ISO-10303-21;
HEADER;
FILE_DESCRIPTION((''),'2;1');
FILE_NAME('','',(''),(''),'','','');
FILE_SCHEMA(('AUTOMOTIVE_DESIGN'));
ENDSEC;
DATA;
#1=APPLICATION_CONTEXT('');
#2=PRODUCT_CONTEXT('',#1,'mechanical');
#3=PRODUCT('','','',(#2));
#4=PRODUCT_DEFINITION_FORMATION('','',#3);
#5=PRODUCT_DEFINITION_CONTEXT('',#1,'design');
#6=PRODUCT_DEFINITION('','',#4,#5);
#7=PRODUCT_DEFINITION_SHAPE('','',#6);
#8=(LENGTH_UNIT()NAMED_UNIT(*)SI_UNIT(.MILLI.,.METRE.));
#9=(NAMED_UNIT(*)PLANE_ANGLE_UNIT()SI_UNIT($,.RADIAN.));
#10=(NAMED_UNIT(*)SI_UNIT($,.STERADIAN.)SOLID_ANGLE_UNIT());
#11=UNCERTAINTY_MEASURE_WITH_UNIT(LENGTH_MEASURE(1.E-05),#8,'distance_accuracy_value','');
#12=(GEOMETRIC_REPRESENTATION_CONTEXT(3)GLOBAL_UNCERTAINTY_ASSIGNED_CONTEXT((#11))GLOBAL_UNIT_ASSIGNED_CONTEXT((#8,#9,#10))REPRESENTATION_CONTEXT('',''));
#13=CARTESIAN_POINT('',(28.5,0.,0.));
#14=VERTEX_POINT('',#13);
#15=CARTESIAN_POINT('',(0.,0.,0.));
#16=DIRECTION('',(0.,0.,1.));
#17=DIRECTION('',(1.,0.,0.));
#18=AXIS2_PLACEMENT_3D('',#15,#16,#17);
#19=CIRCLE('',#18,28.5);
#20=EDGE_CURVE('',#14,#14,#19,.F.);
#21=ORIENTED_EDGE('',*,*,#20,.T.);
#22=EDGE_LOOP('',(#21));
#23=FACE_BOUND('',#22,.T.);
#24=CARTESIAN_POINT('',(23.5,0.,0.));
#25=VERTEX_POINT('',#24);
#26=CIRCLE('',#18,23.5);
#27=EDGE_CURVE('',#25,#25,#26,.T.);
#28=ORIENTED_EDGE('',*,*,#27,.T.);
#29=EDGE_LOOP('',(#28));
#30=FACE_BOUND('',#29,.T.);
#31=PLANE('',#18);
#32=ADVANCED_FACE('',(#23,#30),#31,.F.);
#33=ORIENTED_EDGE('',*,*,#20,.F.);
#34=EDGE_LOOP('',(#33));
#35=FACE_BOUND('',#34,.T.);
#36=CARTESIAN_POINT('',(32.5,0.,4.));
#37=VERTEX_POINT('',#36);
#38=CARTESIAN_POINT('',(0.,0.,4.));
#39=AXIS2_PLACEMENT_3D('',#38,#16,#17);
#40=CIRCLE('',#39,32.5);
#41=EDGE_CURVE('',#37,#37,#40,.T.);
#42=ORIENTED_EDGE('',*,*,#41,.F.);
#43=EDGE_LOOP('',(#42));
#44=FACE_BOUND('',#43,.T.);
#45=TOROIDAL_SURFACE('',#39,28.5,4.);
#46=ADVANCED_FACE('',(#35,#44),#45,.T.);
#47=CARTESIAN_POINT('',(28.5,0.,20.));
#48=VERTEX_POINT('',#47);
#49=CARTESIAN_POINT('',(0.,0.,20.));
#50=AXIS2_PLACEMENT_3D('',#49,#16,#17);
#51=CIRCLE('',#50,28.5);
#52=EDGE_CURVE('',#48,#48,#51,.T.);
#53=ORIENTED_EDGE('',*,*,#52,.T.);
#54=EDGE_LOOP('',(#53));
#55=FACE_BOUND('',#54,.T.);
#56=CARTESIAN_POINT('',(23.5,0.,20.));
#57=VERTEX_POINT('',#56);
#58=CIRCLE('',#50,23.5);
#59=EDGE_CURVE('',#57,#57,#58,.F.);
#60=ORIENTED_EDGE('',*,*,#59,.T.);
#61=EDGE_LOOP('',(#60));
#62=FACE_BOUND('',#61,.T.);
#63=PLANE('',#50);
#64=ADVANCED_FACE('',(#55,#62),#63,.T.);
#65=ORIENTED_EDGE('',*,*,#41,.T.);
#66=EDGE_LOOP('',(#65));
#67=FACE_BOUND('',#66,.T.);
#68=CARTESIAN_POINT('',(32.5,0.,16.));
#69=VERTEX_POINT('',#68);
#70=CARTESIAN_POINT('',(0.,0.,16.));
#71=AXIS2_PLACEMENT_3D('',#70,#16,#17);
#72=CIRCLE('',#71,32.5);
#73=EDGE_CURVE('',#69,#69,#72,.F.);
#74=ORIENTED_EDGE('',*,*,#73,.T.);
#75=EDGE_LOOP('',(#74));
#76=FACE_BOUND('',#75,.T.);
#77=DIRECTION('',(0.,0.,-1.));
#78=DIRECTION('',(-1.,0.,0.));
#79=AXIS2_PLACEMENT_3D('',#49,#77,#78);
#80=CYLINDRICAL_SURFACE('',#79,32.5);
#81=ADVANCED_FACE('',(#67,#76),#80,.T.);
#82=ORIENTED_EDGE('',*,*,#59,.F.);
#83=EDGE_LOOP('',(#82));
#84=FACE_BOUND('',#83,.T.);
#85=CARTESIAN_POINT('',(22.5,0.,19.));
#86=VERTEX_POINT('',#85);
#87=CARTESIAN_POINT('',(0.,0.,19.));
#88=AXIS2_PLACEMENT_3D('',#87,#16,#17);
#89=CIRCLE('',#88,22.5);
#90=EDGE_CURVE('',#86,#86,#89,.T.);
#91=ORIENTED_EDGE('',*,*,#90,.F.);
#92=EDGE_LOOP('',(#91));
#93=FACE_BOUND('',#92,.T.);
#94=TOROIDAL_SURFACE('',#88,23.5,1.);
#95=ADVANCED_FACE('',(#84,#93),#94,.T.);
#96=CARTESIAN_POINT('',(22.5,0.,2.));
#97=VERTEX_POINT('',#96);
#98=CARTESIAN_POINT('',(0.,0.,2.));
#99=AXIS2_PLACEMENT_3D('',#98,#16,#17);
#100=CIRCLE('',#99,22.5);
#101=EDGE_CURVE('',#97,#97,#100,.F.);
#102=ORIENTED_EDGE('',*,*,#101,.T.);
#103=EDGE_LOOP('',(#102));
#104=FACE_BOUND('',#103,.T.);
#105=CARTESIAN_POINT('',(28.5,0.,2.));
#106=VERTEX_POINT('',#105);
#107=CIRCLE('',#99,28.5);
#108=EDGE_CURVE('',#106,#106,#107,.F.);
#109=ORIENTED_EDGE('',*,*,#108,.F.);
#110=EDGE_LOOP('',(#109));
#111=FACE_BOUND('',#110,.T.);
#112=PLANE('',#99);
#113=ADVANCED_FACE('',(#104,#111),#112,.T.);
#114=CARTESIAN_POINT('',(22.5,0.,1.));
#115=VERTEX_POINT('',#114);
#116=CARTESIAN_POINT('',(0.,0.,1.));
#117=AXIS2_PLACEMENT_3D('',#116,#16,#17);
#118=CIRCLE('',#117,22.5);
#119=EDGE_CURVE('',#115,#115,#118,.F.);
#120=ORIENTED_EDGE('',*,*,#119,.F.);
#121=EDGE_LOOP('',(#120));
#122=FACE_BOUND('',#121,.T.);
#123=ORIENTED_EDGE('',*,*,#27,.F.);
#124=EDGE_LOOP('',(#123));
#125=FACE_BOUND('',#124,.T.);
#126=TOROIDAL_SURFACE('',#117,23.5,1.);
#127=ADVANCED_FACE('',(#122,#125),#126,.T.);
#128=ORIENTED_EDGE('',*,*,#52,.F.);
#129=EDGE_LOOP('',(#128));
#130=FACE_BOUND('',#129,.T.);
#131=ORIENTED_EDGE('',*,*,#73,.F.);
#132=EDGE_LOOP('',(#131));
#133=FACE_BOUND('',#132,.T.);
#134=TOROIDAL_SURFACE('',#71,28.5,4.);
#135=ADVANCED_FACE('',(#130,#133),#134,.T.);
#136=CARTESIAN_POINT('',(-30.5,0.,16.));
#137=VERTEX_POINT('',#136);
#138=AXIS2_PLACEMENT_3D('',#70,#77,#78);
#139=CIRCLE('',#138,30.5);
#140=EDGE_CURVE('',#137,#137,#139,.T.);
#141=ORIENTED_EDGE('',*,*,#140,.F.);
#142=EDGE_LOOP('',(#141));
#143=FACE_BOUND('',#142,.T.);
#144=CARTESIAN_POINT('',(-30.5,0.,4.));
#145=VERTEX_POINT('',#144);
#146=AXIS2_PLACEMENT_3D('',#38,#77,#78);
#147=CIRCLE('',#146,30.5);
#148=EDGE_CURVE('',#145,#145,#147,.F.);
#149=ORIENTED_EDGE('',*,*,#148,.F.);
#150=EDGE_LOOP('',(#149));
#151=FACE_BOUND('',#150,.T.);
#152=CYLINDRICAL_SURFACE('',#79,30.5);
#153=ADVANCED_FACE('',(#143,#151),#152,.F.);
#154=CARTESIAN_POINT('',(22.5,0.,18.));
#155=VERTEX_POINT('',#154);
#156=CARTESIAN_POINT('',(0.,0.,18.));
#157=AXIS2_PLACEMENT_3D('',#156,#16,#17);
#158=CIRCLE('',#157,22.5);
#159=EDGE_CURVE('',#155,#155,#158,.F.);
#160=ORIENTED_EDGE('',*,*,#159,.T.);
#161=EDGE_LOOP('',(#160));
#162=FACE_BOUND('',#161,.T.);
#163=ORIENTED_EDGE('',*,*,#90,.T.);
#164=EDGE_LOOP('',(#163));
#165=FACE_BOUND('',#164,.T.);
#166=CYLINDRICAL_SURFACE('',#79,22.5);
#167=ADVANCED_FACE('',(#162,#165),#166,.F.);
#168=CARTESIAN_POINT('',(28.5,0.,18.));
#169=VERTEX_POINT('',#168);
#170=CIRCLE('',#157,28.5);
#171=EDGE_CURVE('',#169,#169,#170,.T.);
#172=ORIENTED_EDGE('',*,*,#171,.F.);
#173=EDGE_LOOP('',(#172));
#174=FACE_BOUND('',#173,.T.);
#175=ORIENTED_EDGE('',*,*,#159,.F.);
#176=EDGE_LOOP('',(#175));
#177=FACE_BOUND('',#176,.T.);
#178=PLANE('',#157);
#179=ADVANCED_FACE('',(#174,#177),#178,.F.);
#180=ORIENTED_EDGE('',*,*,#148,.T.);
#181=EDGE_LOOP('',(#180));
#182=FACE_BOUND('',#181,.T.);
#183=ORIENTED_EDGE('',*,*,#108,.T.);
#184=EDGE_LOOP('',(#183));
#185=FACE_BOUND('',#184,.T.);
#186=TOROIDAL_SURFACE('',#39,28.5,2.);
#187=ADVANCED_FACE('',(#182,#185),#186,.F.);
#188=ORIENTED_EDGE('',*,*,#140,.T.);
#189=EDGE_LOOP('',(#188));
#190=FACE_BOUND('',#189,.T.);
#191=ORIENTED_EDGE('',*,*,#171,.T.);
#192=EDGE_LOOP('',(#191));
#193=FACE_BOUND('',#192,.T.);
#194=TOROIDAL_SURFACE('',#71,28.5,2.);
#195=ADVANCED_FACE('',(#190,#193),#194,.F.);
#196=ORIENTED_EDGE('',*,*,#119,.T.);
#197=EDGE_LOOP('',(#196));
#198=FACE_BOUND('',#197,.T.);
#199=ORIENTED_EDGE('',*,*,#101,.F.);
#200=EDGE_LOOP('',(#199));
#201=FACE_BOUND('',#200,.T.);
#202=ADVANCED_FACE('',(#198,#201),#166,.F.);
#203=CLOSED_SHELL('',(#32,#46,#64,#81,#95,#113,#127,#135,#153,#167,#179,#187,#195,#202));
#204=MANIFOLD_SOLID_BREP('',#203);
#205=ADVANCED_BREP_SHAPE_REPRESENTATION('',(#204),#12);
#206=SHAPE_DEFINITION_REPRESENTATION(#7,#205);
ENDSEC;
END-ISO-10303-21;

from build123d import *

# Parameters (mm, degrees)
SKETCH1_R           = 32.5
SKETCH1_R_2         = 22.5
EXTRUDE_THIN1_DEPTH = 20
FILLET1_R           = 4
FILLET2_R           = 1


# Read off the part's stored shape, not the designer's step: Shell1
with BuildPart() as part:
    # Sketch1 → Extrude-Thin1 (new body)
    with BuildSketch(Plane.XY):
        Circle(SKETCH1_R)
        Circle(SKETCH1_R_2, mode=Mode.SUBTRACT)
    extrude(amount=EXTRUDE_THIN1_DEPTH)

    # Fillet1
    fillet1_edges = [part.edges().sort_by_distance(p)[0] for p in [
        (-32.5, 0, 0),
        (-32.5, 0, 20),
    ]]
    fillet(fillet1_edges, radius=FILLET1_R)

    # Fillet2
    fillet2_edges = [part.edges().sort_by_distance(p)[0] for p in [
        (-22.5, 0, 0),
        (-22.5, 0, 20),
    ]]
    fillet(fillet2_edges, radius=FILLET2_R)

    # Shell1 outline → Shell1 (revolve, cut)
    with BuildSketch(Plane.XZ):
        with BuildLine():
            Line((28.5, 18), (22.5, 18))
            Line((22.5, 18), (22.5, 2))
            Line((22.5, 2), (28.5, 2))
            ThreePointArc((28.5, 2), (29.914213562, 2.585786438), (30.5, 4))
            Line((30.5, 4), (30.5, 16))
            ThreePointArc((30.5, 16), (29.914213562, 17.414213562), (28.5, 18))
        make_face()
    revolve(axis=Axis((0, 0, 0), (0, 0, 1)), mode=Mode.SUBTRACT)


solid = part.part
